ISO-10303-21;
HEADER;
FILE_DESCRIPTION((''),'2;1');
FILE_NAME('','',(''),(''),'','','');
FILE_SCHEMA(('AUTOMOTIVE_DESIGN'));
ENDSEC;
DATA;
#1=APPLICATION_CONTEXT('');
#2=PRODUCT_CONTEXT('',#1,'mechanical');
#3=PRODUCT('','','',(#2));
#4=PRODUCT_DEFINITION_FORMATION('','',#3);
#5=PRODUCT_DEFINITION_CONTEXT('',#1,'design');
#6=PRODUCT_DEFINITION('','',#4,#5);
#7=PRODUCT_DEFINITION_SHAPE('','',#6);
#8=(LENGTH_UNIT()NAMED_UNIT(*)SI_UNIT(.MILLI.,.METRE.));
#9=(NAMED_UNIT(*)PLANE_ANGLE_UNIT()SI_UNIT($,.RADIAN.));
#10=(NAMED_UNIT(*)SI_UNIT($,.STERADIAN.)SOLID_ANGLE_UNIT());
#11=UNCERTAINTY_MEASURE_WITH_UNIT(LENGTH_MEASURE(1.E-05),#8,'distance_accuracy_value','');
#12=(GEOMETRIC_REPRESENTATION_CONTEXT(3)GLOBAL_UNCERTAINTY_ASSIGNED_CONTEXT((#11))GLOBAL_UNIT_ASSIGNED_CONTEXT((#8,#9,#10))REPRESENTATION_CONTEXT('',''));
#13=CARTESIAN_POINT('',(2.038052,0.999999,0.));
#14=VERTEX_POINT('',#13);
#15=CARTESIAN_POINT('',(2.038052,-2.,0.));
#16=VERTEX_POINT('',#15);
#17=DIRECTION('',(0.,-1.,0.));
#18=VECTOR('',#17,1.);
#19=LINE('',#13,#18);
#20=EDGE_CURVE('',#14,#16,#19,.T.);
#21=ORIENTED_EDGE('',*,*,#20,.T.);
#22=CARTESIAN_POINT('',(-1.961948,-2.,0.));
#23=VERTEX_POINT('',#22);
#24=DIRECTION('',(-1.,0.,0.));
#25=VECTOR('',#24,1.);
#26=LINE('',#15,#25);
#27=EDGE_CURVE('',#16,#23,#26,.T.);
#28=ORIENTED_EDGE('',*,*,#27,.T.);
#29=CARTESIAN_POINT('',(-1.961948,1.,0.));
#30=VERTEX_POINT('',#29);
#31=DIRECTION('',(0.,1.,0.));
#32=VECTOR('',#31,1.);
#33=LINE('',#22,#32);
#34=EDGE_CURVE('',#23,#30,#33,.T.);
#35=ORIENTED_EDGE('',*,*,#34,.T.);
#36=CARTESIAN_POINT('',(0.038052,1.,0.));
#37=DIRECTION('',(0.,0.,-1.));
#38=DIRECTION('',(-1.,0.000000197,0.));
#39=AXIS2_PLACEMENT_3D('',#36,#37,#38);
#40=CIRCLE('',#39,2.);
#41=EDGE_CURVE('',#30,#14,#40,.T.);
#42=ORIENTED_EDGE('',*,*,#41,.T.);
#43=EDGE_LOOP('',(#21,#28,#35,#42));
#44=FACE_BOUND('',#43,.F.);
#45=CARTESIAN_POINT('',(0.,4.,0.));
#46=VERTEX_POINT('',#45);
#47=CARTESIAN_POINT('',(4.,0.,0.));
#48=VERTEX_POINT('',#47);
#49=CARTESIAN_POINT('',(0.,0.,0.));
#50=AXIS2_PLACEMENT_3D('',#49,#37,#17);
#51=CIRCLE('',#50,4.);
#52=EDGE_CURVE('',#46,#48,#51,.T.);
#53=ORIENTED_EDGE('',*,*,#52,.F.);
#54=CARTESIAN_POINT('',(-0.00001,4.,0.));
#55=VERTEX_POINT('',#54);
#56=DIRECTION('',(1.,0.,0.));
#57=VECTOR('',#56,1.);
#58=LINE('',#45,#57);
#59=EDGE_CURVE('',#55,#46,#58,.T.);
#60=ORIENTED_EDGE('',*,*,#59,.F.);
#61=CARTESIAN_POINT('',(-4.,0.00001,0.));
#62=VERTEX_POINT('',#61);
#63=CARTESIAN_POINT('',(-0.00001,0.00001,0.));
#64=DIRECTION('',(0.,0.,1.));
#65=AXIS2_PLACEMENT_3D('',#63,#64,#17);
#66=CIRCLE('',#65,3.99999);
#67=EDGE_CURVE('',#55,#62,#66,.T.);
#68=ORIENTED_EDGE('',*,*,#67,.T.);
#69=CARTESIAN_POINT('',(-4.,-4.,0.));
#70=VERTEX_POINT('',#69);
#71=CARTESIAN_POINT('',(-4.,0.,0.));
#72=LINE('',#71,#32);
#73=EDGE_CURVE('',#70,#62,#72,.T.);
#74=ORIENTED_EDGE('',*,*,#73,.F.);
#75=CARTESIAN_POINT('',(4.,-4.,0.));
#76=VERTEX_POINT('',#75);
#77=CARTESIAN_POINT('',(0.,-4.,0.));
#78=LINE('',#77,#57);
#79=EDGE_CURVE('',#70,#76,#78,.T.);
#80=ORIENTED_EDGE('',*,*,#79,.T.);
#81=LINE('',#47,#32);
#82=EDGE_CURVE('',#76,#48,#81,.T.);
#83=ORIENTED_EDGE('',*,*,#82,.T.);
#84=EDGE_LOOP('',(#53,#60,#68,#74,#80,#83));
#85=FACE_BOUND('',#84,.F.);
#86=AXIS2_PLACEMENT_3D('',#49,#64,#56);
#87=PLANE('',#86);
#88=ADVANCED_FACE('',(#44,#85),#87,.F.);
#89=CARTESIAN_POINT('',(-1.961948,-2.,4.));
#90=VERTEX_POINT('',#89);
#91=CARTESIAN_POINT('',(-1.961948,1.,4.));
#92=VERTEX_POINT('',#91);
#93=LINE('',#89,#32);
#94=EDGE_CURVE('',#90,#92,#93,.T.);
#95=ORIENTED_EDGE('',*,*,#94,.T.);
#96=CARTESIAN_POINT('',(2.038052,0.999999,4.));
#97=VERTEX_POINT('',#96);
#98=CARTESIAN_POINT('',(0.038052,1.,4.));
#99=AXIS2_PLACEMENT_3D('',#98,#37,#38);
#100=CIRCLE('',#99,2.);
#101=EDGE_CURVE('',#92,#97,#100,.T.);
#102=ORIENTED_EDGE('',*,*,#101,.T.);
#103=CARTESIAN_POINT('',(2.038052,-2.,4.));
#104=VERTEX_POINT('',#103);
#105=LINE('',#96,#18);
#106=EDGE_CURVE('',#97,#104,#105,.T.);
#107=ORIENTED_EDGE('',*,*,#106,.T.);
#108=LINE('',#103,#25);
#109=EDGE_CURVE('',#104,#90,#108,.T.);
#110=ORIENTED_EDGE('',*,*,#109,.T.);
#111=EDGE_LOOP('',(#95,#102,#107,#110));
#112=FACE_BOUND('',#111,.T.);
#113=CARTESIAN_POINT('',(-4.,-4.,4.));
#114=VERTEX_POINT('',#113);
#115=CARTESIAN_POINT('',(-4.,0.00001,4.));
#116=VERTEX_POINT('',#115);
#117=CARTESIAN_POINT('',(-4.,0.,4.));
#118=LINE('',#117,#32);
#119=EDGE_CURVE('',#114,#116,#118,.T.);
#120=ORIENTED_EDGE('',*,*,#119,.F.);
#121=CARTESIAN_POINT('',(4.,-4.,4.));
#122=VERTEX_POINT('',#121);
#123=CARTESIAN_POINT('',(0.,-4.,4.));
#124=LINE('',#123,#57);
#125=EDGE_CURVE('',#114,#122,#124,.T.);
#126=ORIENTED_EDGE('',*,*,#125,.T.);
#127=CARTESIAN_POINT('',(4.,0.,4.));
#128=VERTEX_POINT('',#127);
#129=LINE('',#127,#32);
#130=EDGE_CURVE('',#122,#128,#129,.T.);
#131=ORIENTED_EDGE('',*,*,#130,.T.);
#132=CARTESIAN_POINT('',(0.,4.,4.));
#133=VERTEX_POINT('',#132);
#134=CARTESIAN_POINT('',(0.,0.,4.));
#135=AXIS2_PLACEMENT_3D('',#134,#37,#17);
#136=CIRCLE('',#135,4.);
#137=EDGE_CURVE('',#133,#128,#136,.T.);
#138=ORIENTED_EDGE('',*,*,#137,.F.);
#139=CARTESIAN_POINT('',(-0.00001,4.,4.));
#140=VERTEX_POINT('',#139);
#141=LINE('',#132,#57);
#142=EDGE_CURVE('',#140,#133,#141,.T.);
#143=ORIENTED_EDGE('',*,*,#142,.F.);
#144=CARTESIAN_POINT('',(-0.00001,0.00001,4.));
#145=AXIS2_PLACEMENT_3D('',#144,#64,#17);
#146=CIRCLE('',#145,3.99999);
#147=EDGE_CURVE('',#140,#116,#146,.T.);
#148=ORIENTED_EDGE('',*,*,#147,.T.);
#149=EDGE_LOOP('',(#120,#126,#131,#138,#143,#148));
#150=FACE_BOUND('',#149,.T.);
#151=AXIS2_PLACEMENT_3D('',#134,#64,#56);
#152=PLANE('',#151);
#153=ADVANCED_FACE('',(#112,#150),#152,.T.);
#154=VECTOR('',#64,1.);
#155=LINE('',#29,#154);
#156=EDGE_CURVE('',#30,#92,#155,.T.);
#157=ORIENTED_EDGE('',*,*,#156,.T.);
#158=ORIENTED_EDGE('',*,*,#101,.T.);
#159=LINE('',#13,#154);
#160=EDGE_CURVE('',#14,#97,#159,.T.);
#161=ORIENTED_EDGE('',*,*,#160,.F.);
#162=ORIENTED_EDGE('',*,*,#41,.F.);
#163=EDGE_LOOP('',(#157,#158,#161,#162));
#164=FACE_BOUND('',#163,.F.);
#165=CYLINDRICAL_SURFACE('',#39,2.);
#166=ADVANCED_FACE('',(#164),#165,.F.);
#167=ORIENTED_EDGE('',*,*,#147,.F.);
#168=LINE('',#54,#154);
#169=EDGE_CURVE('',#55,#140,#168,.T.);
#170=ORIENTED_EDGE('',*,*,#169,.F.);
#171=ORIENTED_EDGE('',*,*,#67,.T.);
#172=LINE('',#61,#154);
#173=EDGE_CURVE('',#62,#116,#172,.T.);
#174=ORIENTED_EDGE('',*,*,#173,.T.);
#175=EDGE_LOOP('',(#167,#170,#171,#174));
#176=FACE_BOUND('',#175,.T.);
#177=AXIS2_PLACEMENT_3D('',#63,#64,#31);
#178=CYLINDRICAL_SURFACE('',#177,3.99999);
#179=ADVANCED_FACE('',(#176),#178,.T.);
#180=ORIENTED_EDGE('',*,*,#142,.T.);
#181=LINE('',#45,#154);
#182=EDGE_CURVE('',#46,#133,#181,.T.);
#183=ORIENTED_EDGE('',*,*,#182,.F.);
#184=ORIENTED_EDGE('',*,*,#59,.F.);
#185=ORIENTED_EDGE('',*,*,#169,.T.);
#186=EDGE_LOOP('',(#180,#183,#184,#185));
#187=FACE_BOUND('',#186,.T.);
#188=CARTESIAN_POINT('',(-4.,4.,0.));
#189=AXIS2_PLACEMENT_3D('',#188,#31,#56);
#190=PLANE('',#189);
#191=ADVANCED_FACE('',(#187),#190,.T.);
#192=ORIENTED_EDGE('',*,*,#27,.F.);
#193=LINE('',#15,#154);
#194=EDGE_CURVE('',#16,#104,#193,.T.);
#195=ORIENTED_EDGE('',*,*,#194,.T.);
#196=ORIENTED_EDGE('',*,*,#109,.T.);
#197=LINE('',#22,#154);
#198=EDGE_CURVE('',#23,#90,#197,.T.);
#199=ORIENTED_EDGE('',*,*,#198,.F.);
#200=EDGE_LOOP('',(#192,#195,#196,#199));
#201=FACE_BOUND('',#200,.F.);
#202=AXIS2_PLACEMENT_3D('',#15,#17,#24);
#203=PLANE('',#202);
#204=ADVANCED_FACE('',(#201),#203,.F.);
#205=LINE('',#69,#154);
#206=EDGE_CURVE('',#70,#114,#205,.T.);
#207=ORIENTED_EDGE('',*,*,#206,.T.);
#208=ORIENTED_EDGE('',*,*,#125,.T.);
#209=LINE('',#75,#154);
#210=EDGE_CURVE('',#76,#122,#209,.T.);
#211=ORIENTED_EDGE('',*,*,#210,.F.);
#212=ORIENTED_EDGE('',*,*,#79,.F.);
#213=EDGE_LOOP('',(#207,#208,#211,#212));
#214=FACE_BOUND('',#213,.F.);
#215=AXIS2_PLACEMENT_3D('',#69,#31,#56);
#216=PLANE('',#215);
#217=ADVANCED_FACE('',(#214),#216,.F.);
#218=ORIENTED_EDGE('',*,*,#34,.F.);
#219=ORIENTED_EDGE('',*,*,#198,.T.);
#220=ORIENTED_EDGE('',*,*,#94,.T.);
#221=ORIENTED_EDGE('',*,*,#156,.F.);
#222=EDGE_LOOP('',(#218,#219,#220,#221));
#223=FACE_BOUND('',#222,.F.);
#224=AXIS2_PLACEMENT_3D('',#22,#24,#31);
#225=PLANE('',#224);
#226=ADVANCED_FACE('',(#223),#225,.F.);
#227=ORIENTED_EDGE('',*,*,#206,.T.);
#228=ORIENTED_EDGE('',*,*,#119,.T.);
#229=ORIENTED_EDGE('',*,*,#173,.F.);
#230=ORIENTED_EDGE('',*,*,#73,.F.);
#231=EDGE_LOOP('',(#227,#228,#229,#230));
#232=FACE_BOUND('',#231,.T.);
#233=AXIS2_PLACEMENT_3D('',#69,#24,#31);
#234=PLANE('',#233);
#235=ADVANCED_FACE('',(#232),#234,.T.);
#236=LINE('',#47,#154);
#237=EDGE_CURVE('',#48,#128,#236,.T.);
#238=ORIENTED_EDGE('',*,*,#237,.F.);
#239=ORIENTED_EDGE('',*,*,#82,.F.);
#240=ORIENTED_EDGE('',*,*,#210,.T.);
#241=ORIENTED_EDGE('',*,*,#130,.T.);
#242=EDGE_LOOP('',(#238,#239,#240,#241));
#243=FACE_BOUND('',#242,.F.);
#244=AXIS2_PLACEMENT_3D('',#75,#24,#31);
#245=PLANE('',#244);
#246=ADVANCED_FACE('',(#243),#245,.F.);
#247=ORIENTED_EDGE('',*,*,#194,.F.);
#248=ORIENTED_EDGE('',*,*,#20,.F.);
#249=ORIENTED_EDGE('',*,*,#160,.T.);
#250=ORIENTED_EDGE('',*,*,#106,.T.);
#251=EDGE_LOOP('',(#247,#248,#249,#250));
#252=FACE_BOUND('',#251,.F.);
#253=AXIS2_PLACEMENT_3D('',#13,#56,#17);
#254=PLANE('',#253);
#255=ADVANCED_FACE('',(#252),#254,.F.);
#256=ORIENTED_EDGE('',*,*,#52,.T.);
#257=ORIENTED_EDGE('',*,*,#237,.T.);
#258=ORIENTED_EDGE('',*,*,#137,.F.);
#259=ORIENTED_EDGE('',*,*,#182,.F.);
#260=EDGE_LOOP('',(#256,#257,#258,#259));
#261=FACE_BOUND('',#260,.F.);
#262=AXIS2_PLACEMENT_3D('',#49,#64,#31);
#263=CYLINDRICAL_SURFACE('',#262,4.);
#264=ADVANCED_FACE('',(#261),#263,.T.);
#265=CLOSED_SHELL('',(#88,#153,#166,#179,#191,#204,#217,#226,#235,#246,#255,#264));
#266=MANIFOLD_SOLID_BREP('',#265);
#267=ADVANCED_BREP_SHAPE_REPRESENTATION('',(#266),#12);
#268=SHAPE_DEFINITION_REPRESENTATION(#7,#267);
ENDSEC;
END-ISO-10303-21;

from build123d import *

# Parameters (mm, degrees)
F0_W     = 8
F0_H     = 8
F1_DEPTH = 4
F2_R     = 4
F3_R     = 3.99999


# Not quite as in the source:
# - a fillet or chamfer is up to 0.001 mm smaller than in the source, because OpenCascade refuses the exact size


with BuildPart() as f1:
    # F0 (on Top) → F1 (new body)
    with BuildSketch(Plane.XY):
        Rectangle(F0_W, F0_H)
        with BuildLine():
            Line((-1.9619476116, -2), (-1.9619476116, 1))
            ThreePointArc((-1.9619476116, 1), (0.0380527829, 2.9999996055), (2.0380523884, 0.9999992109))
            Line((2.0380523884, 0.9999992109), (2.0380523884, -2))
            Line((2.0380523884, -2), (-1.9619476116, -2))
        make_face(mode=Mode.SUBTRACT)
    extrude(amount=F1_DEPTH)

    # F2
    f2_edges = [f1.edges().sort_by_distance(p)[0] for p in [
        (4, 4, 2),
    ]]
    fillet(f2_edges, radius=F2_R)

    # F3 (radius 4 in the source; OpenCascade refuses exactly that, so slightly less here)
    f3_edges = [f1.edges().sort_by_distance(p)[0] for p in [
        (-4, 4, 2),
    ]]
    fillet(f3_edges, radius=F3_R)


solid = f1.part
